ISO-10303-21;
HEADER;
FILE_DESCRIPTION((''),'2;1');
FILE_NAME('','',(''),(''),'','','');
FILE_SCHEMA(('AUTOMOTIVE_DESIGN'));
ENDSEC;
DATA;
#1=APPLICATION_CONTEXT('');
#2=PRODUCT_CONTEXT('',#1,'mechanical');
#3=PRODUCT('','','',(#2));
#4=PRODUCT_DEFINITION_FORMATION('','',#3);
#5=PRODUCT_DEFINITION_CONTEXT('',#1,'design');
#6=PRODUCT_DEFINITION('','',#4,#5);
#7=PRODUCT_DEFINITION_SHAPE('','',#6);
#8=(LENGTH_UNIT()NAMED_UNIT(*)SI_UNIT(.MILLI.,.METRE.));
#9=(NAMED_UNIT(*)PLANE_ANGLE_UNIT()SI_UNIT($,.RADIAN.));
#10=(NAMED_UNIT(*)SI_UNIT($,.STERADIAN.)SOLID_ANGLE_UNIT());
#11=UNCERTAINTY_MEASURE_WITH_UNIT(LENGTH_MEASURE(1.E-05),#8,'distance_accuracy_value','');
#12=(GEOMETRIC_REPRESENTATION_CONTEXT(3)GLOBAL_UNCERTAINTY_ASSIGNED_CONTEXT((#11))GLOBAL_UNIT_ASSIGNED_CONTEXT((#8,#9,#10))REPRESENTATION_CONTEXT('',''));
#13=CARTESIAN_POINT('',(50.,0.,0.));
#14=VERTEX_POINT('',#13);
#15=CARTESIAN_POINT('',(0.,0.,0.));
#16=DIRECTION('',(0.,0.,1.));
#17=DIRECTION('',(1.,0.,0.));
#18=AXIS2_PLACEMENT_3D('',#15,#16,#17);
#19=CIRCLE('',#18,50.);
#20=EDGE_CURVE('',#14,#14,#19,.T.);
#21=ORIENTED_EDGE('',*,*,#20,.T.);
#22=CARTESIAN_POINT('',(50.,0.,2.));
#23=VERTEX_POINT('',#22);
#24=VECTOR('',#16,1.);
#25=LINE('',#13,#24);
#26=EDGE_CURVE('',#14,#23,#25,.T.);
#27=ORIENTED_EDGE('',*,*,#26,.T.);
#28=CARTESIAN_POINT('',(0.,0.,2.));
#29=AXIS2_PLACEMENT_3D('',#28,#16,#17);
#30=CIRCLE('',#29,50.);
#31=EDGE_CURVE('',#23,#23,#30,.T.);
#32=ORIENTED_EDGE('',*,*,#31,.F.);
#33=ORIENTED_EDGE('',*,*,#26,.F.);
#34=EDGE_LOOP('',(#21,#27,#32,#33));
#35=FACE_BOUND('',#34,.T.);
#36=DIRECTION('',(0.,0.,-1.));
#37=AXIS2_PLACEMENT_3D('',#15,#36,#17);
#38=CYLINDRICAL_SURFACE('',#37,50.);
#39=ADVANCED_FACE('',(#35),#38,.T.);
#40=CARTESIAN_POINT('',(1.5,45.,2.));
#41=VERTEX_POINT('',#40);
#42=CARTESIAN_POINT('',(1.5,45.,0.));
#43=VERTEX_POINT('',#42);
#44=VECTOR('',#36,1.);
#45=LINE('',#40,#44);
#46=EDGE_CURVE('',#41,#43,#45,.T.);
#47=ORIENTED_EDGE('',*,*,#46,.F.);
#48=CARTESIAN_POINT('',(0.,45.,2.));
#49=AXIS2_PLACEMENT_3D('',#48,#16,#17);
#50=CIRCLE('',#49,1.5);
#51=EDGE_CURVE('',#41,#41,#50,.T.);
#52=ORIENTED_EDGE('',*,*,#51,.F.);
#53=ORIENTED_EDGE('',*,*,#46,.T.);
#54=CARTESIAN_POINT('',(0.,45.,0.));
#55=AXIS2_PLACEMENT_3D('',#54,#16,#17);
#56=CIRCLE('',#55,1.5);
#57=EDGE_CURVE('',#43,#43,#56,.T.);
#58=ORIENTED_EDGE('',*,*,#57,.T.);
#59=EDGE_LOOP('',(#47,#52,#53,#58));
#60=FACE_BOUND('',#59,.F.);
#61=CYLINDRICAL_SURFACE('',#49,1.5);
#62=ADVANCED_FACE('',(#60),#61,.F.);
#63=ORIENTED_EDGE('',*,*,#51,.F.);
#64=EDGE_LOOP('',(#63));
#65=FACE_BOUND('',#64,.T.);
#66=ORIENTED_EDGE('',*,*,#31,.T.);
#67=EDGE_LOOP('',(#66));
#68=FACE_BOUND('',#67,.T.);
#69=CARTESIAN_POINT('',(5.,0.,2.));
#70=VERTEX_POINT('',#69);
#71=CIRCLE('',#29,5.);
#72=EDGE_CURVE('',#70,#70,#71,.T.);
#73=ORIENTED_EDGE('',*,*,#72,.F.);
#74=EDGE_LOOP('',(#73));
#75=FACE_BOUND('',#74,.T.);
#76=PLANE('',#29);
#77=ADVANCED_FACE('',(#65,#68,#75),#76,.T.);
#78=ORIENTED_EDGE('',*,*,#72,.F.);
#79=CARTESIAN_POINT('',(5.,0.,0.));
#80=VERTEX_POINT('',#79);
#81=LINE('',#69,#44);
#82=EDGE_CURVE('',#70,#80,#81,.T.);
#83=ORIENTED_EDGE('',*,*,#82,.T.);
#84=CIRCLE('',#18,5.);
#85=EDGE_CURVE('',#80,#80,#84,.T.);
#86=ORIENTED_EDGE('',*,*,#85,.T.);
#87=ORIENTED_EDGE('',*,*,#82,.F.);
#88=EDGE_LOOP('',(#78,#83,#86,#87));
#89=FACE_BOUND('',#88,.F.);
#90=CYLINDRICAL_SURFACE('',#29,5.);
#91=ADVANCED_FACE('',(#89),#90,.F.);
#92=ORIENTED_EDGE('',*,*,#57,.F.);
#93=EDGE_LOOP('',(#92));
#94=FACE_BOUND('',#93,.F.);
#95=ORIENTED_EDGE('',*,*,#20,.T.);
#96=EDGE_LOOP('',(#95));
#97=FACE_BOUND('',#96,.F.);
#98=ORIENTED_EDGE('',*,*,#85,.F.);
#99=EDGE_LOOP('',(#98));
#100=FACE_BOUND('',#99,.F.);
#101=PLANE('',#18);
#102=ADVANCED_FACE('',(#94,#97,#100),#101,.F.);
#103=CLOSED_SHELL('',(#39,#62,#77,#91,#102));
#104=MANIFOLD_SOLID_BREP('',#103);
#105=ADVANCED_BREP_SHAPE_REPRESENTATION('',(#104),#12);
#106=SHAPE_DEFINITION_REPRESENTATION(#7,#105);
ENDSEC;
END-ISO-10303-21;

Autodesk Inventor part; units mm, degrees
ref_plane "YZ Plane" through (0, 0, 0) normal (1, 0, 0) x (0, 1, 0)
ref_plane "XZ Plane" through (0, 0, 0) normal (0, 1, 0) x (-1, 0, 0)
ref_plane "XY Plane" through (0, 0, 0) normal (0, 0, 1) x (1, 0, 0)
sketch "Sketch1" plane through (0, 0, 0) normal (0, 0, 1) x (1, 0, 0)
  circle A0 centre (0, 0) radius 50
  dimension "d0" = 100
extrude "Plate1" add sketch "Sketch1" along normal blind 2
sketch "Sketch2" plane through (0, 0, 2) normal (0, 0, 1) x (1, 0, 0)
  circle A0 centre (0, 0) radius 50 projected
  circle A1 centre (0, 0) radius 5
  circle A2 centre (0, 45) radius 1.5
  dimension "d2" = 10
  dimension "d5" = 3
  dimension "d6" = 45
extrude "Extrusion1" cut sketch "Sketch2" against normal through all contours A1 | A2
equation "\"BendRadius\" = Thickness"
equation "\"BendReliefWidth\" = Thickness"
equation "\"BendReliefDepth\" = 0.5 * Thickness"
equation "\"CornerReliefSize\" = 4 * Thickness"
equation "\"MinimumRemnant\" = 2 * Thickness"
equation "\"TransitionRadius\" = BendRadius"
equation "\"JacobiRadiusSize\" = BendRadius"
equation "\"GapSize\" = Thickness"
equation "\"d1\" = BendRadius"
equation "\"Thickness\" = 2"
properties part number "Skiva"
